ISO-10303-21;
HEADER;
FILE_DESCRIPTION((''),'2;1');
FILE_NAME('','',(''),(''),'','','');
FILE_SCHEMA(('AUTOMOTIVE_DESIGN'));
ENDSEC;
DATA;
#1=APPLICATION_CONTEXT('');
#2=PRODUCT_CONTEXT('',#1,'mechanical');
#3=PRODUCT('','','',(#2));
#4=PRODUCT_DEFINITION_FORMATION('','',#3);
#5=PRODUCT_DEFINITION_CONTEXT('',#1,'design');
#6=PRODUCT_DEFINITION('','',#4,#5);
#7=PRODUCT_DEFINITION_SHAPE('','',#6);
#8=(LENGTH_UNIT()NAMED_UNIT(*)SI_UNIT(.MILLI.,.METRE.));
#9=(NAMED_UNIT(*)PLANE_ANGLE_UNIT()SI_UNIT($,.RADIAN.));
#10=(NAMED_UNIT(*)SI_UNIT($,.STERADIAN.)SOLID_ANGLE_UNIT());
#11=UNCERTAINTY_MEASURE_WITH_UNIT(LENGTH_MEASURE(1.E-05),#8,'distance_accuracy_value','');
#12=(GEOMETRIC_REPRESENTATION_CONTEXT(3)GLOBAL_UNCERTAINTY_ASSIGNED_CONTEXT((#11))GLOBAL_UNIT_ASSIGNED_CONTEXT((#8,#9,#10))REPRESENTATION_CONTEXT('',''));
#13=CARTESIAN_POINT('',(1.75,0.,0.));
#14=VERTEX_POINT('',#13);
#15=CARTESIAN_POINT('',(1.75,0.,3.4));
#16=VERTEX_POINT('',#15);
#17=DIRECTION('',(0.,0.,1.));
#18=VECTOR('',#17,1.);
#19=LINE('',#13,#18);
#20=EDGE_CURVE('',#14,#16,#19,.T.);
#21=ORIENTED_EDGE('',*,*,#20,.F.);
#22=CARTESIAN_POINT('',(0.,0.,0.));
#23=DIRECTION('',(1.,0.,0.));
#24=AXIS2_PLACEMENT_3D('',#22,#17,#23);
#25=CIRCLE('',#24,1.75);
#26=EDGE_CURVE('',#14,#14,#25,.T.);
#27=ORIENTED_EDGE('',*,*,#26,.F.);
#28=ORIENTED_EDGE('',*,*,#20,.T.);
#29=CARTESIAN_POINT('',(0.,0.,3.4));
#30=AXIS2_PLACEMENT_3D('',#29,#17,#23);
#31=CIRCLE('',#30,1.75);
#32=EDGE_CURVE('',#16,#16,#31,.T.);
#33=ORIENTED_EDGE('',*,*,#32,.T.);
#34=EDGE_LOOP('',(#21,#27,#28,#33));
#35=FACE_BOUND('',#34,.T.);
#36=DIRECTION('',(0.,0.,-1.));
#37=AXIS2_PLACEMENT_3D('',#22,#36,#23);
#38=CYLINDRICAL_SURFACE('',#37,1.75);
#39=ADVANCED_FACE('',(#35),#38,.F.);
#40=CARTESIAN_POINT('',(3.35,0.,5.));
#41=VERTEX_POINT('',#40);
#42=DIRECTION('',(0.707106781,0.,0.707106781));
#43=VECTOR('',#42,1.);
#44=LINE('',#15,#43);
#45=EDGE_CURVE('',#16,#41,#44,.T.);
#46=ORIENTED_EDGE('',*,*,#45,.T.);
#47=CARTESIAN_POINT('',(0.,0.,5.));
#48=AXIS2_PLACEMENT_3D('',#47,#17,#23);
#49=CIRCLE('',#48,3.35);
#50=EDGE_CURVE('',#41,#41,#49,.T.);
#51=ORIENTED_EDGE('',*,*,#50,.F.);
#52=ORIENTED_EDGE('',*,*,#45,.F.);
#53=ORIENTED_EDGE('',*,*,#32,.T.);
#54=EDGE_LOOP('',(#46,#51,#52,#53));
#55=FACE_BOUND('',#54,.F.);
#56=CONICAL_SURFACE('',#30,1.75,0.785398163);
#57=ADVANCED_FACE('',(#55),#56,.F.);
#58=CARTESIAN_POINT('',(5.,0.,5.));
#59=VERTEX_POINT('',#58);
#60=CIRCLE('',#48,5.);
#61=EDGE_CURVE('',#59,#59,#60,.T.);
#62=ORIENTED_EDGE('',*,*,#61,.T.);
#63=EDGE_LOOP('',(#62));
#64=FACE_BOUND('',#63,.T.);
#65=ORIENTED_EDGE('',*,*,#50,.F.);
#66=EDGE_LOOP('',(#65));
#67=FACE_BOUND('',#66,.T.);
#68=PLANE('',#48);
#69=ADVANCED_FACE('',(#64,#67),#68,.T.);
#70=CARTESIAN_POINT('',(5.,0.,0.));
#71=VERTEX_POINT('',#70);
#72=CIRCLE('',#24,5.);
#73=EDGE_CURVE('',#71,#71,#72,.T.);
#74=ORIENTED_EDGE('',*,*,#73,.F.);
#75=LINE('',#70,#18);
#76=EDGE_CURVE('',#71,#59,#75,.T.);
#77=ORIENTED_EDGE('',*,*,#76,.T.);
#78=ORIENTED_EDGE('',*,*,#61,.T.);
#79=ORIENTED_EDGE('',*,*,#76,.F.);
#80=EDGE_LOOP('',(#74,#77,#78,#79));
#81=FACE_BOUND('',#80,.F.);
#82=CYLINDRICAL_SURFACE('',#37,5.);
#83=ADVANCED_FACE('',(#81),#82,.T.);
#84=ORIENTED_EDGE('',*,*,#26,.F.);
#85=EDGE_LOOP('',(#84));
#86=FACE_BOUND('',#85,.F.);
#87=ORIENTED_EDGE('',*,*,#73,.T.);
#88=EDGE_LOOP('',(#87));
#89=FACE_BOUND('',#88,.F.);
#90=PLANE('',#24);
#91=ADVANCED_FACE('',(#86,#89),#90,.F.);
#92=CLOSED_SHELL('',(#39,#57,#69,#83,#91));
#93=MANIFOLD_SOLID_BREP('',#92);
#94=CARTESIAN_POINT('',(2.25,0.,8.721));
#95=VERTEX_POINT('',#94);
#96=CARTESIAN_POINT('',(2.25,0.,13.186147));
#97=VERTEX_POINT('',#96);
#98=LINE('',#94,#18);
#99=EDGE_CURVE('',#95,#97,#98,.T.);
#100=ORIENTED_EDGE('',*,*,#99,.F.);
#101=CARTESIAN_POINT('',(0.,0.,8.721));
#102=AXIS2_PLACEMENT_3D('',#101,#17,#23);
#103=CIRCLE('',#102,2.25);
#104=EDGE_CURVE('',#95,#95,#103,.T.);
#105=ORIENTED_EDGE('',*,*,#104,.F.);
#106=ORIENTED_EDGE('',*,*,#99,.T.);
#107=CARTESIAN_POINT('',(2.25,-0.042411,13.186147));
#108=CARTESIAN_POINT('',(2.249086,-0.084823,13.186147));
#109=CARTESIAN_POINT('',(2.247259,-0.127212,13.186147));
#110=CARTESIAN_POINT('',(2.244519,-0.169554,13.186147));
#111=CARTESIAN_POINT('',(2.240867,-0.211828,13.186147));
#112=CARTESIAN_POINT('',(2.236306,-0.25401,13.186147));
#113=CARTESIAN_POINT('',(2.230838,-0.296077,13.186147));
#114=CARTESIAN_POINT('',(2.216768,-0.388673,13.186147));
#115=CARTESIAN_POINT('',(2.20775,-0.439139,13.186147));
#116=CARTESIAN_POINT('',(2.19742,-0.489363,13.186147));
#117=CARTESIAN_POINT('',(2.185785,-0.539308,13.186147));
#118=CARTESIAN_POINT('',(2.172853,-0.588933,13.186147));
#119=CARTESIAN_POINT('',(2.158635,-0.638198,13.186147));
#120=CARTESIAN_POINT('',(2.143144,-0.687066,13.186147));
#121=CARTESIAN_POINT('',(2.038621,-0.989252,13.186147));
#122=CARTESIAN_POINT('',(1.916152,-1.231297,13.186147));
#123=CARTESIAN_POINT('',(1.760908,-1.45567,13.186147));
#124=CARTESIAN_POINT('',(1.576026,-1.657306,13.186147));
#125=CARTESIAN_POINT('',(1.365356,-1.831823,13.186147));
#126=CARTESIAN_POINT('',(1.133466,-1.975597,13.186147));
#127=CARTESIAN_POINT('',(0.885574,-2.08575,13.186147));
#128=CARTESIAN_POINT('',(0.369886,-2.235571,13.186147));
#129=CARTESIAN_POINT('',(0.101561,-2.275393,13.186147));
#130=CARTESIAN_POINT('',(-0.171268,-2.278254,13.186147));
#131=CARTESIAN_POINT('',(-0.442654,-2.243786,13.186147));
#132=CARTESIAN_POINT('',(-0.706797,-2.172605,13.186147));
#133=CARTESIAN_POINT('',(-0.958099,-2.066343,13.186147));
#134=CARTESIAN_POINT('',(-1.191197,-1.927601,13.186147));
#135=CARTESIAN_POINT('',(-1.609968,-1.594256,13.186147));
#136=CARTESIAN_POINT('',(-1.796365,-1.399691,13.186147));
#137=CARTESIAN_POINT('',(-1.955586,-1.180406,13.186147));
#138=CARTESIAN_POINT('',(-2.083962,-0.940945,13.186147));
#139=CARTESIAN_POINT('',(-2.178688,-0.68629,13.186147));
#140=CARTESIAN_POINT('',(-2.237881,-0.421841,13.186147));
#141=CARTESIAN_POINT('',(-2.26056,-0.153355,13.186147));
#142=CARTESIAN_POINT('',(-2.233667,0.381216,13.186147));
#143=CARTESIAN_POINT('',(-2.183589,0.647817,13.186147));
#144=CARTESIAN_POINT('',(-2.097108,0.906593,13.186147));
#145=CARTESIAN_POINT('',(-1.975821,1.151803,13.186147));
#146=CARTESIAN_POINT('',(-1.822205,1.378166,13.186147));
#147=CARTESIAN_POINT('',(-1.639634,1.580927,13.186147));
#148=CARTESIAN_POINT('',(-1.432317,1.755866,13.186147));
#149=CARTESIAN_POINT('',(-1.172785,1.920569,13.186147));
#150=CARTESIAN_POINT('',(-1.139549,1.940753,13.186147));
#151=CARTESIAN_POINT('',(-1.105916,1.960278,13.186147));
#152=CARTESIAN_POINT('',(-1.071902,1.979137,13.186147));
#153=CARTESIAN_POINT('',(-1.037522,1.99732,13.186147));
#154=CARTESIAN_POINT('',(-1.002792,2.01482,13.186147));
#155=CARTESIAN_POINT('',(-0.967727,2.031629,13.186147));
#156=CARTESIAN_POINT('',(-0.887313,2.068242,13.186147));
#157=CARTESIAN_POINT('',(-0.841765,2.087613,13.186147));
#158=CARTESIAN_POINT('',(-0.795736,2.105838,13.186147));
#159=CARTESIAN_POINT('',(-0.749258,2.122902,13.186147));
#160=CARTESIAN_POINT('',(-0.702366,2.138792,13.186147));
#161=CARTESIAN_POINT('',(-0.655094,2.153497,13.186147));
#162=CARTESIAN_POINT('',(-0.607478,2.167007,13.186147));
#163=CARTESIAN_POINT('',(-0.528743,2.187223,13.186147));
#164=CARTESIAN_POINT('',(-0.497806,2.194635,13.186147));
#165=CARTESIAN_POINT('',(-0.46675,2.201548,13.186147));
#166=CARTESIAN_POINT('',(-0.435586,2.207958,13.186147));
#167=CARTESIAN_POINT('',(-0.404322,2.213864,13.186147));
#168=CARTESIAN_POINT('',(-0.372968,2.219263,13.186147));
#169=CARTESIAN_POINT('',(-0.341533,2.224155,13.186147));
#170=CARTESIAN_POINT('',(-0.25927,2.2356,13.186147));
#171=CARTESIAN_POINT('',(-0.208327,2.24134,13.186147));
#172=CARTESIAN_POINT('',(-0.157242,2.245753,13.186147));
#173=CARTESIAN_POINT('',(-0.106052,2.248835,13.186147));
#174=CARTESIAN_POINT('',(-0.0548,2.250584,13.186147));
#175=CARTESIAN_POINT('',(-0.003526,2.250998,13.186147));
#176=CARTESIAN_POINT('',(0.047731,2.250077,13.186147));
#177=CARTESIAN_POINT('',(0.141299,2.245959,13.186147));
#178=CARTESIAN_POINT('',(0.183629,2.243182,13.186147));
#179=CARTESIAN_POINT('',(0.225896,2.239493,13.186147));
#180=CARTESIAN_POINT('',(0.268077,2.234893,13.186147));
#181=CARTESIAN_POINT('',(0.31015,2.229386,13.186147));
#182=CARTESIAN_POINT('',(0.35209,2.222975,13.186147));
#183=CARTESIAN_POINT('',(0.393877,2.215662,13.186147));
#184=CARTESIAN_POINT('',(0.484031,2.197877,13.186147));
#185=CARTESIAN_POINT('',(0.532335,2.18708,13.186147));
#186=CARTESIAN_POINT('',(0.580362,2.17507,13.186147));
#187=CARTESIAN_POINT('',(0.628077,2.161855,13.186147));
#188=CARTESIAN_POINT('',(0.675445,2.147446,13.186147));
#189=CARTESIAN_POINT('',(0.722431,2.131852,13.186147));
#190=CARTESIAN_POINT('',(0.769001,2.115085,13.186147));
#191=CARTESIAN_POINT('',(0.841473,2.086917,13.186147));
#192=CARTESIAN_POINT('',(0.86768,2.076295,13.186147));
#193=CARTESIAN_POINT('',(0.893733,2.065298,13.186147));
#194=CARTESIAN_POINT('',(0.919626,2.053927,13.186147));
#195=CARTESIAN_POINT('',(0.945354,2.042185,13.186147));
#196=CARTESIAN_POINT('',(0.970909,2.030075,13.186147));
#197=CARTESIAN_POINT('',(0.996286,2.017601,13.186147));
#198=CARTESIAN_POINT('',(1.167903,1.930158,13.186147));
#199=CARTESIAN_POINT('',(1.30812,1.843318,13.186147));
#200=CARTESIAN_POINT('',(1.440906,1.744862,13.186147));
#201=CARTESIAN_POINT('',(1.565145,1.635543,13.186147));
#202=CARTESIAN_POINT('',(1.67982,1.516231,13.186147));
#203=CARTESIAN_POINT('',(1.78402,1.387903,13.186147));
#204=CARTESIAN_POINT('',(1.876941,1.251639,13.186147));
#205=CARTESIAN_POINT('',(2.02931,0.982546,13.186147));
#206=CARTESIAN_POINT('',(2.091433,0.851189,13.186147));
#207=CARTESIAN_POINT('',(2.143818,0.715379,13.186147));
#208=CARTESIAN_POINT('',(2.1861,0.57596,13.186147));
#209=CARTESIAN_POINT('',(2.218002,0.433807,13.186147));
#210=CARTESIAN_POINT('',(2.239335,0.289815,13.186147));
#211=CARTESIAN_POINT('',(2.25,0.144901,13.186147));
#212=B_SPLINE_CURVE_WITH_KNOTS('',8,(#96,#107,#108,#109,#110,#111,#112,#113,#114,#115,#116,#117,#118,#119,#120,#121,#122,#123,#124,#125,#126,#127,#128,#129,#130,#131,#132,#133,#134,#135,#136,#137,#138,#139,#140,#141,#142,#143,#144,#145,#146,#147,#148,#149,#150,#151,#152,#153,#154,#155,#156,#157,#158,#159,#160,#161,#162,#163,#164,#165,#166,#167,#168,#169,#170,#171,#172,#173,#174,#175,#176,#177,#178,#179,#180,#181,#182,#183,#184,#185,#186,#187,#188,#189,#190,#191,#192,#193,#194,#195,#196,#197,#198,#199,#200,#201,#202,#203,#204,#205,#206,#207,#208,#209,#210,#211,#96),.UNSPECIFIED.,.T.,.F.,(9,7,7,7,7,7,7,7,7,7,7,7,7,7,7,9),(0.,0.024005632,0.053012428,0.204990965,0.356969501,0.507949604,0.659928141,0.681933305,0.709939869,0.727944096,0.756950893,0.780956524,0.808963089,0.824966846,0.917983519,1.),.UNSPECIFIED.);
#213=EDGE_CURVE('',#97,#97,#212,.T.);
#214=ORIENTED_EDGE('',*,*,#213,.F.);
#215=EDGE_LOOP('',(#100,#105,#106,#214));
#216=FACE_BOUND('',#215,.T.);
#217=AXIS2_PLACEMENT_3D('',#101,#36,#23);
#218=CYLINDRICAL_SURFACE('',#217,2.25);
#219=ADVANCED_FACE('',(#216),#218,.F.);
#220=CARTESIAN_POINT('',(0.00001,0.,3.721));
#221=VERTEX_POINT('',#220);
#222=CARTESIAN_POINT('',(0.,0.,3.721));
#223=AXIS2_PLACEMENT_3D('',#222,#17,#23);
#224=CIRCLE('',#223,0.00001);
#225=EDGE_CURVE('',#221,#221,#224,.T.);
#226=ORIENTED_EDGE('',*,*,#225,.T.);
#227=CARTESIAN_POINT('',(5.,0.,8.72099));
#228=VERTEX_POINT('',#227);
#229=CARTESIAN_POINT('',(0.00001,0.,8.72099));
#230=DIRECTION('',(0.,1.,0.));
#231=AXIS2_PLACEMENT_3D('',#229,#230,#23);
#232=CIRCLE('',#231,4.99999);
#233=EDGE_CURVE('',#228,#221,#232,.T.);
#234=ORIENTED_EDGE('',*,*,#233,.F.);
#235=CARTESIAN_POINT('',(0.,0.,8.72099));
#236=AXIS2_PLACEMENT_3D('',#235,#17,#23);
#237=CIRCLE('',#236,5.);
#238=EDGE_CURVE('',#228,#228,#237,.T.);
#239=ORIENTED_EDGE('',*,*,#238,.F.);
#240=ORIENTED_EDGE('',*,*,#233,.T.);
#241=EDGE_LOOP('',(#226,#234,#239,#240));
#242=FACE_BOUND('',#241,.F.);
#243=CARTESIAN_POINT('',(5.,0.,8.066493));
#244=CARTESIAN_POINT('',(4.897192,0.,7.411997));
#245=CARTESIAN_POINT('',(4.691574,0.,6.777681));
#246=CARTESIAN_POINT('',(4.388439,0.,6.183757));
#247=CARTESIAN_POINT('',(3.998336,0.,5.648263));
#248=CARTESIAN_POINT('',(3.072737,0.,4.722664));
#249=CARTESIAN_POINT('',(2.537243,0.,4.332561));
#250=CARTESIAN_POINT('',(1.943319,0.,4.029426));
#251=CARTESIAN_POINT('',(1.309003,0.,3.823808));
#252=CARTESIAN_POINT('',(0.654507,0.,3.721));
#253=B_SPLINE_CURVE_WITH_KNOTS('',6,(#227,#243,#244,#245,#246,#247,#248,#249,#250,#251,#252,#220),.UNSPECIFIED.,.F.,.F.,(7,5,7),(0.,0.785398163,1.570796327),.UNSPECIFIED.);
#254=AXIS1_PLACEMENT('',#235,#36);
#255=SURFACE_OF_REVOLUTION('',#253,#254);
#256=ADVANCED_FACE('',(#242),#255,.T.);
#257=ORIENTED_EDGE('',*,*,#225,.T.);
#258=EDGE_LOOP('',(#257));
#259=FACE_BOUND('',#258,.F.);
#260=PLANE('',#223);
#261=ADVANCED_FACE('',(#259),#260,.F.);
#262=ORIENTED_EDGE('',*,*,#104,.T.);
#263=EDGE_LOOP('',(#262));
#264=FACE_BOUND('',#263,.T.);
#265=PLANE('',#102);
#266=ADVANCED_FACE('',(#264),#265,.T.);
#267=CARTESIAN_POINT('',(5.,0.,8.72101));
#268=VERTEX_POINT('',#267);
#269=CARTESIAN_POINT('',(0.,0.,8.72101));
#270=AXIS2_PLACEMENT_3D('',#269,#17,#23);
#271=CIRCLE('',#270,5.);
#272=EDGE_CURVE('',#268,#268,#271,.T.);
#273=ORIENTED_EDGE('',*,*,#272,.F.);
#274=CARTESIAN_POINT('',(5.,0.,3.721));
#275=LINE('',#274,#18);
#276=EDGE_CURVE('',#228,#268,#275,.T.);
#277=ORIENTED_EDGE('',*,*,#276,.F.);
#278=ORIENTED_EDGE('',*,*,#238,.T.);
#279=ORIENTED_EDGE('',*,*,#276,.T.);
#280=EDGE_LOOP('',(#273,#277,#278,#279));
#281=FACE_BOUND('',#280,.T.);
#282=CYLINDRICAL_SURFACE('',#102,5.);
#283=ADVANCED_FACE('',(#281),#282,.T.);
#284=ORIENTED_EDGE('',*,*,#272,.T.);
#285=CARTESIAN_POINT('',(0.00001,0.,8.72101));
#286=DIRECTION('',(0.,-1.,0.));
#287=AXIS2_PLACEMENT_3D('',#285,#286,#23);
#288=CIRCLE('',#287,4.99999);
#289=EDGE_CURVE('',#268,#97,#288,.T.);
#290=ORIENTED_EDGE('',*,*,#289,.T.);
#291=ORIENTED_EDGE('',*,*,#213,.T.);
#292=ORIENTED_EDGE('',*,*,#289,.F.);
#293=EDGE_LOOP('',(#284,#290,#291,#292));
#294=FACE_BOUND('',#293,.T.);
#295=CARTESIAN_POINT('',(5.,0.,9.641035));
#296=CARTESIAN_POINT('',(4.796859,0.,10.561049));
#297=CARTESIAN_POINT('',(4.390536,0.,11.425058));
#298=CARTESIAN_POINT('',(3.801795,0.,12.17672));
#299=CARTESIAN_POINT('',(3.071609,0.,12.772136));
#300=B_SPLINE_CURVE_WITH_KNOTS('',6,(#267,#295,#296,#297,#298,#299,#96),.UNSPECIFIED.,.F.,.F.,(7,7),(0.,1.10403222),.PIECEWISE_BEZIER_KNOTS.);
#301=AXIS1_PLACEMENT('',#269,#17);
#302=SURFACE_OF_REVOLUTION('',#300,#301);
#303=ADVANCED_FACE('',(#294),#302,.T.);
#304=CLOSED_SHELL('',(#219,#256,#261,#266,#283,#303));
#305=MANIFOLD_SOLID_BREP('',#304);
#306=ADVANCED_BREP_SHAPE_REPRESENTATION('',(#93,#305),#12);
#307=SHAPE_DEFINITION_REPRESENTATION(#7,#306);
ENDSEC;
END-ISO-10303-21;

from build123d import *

# Parameters (mm, degrees)
F0_R     = 5
F0_R_2   = 1.75
F1_DEPTH = 5
F2_SIZE  = 1.6
F4_R     = 5
F4_R_2   = 2.25
F5_DEPTH = 5
F6_R     = 4.99999
F7_DEPTH = 10


# Not quite as in the source:
# - a fillet or chamfer is up to 0.001 mm smaller than in the source, because OpenCascade refuses the exact size


with BuildPart() as f1:
    # F0 (on Top) → F1 (new body)
    with BuildSketch(Plane.XY):
        Circle(F0_R)
        Circle(F0_R_2, mode=Mode.SUBTRACT)
    extrude(amount=F1_DEPTH)

    # F2
    f2_edges = [f1.edges().sort_by_distance(p)[0] for p in [
        (-1.75, 0, 5),
    ]]
    chamfer(f2_edges, length=F2_SIZE)


with BuildPart() as f5:
    # F4 (on offset) → F5 (new body, symmetric)
    with BuildSketch(Plane.XY.offset(8.721)):
        Circle(F4_R)
        Circle(F4_R_2, mode=Mode.SUBTRACT)
        Circle(F4_R_2)
    extrude(amount=F5_DEPTH, both=True)

    # F6 (radius 5 in the source; OpenCascade refuses exactly that, so slightly less here)
    f6_edges = [f5.edges().sort_by_distance(p)[0] for p in [
        (-5, 0, 3.721),
        (5, 0, 8.721),
        (-5, 0, 13.721),
    ]]
    fillet(f6_edges, radius=F6_R)

    # F4 (on offset) → F7 (cut)
    with BuildSketch(Plane.XY.offset(8.721)):
        Circle(F4_R_2)
    extrude(amount=F7_DEPTH, mode=Mode.SUBTRACT)


solid = Compound([f1.part, f5.part])
